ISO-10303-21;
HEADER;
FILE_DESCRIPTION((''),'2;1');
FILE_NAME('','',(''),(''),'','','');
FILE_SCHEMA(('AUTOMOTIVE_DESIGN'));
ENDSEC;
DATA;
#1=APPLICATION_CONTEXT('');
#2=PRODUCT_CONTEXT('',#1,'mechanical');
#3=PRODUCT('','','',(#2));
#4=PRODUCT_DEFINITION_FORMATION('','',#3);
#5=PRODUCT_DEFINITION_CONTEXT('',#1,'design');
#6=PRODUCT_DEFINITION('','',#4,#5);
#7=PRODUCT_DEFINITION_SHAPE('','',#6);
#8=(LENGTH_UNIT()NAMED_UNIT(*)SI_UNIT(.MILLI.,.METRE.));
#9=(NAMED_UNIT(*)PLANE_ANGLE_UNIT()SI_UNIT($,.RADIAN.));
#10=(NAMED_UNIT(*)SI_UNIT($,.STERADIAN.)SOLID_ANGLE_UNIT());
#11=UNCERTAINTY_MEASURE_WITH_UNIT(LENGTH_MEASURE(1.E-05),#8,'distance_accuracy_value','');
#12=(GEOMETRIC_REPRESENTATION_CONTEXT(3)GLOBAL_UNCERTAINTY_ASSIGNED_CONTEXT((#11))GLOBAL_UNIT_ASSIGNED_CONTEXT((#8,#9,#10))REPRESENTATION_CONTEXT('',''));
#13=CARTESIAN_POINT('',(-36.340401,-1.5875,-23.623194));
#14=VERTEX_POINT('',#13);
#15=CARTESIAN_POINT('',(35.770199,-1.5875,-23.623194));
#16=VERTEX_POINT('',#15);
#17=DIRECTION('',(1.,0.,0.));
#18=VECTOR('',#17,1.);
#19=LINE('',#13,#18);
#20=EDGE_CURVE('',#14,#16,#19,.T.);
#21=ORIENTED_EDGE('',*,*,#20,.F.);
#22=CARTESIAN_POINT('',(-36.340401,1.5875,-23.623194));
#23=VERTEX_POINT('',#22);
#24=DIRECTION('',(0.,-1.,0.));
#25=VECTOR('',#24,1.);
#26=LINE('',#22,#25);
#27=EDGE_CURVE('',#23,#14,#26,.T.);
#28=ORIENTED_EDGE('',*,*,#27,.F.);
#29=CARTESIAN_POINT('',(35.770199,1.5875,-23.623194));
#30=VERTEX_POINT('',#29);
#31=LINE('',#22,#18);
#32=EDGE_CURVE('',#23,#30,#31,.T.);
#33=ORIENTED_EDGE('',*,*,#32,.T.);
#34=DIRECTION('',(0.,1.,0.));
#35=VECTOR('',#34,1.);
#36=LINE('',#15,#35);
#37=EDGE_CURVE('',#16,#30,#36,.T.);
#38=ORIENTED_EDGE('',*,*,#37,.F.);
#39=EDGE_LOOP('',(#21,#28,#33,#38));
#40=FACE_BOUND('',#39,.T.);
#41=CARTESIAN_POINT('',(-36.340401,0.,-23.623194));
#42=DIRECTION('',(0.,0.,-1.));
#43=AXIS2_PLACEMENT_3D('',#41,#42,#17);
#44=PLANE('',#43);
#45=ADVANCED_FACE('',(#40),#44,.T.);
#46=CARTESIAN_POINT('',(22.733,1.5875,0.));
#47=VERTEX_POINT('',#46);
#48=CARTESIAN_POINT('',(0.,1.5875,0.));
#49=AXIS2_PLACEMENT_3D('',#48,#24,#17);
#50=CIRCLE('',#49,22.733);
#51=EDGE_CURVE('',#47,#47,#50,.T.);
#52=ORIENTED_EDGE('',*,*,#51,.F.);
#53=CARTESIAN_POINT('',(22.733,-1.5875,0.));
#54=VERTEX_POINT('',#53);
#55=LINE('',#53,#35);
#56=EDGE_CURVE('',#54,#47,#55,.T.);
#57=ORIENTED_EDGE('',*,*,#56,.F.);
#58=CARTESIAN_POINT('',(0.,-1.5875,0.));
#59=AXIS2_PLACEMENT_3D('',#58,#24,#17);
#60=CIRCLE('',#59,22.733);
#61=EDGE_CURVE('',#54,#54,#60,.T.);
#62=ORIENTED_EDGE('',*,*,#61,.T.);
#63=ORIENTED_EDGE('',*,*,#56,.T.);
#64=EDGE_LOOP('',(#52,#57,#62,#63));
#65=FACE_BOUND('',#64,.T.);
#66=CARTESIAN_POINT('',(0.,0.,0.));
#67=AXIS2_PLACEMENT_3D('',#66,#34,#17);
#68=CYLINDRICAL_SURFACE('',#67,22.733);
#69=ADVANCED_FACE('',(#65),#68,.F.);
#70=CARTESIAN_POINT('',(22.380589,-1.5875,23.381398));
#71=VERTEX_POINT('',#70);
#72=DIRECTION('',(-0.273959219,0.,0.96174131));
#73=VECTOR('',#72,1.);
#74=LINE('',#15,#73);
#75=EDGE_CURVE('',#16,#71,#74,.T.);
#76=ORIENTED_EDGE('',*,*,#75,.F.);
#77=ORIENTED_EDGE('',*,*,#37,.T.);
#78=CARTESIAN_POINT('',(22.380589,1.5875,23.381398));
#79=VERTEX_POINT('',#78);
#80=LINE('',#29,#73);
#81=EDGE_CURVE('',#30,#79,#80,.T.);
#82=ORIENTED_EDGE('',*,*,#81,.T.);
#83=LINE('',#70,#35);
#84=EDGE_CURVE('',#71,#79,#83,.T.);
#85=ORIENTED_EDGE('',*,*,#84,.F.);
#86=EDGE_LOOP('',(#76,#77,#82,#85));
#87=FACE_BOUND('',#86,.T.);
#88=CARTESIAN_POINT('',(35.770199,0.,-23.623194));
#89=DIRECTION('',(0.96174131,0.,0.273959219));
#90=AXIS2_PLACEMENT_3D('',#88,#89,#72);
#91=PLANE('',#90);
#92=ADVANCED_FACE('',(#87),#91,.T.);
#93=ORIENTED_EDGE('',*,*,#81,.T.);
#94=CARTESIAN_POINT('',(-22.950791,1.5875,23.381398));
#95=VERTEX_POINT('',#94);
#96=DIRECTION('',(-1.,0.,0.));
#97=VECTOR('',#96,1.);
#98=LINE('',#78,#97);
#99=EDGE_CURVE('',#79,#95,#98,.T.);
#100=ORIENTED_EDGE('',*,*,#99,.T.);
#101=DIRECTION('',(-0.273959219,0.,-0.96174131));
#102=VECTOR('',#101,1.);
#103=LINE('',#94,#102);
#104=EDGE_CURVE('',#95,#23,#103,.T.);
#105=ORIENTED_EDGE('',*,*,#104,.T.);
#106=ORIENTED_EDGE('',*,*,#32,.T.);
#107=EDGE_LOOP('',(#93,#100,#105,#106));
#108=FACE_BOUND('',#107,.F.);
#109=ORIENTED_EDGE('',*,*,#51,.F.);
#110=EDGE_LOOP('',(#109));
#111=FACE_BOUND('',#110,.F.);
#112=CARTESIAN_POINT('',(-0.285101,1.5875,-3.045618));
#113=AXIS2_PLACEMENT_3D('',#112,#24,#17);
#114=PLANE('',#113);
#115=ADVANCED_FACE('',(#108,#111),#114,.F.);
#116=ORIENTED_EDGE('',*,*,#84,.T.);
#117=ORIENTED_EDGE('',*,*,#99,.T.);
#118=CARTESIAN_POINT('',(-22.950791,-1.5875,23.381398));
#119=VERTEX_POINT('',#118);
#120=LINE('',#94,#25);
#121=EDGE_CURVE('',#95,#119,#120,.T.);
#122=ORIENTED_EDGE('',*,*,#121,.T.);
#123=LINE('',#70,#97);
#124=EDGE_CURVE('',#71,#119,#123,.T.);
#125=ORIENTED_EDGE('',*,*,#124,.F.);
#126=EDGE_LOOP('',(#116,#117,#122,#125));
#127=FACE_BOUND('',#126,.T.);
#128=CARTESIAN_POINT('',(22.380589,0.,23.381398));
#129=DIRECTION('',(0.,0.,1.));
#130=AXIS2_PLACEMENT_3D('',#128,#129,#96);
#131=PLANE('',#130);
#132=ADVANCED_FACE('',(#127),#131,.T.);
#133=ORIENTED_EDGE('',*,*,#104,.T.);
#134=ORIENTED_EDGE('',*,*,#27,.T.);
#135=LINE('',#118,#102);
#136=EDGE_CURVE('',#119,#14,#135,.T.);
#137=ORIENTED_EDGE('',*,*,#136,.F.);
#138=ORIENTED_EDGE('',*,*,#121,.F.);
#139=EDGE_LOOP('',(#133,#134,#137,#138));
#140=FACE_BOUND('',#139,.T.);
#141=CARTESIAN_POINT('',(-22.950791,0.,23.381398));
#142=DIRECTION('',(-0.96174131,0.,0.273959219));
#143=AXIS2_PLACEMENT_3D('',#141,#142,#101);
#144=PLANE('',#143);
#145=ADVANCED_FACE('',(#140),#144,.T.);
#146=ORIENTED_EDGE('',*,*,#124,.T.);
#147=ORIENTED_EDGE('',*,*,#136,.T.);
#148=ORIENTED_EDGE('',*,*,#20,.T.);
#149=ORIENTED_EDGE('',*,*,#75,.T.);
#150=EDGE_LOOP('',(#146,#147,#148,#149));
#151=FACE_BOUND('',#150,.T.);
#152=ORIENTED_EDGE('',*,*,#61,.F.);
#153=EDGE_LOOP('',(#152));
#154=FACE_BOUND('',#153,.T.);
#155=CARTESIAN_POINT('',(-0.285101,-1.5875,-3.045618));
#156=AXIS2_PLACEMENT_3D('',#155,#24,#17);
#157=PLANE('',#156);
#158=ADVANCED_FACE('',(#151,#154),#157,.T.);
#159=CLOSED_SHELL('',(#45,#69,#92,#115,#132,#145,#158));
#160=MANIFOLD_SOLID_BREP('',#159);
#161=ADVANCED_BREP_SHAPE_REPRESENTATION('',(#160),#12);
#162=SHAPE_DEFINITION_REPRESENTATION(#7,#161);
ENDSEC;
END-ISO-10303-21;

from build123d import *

# Parameters (mm, degrees)
F0_R     = 22.733
F1_DEPTH = 1.5875


# Not quite as in the source:
# - a feature names something its author has since deleted; it is built from what else it names


with BuildPart() as f1:
    # F0 (on Front) → F1 (new body, symmetric)
    with BuildSketch(Plane.XZ):
        Polygon((22.3805892097, 23.3813975786), (-22.9507907903, 23.3813975786), (-36.3404007903, -23.6231935325), (35.7701992097, -23.6231935325), align=None)
        Circle(F0_R, mode=Mode.SUBTRACT)
    extrude(amount=F1_DEPTH, both=True)


solid = f1.part
